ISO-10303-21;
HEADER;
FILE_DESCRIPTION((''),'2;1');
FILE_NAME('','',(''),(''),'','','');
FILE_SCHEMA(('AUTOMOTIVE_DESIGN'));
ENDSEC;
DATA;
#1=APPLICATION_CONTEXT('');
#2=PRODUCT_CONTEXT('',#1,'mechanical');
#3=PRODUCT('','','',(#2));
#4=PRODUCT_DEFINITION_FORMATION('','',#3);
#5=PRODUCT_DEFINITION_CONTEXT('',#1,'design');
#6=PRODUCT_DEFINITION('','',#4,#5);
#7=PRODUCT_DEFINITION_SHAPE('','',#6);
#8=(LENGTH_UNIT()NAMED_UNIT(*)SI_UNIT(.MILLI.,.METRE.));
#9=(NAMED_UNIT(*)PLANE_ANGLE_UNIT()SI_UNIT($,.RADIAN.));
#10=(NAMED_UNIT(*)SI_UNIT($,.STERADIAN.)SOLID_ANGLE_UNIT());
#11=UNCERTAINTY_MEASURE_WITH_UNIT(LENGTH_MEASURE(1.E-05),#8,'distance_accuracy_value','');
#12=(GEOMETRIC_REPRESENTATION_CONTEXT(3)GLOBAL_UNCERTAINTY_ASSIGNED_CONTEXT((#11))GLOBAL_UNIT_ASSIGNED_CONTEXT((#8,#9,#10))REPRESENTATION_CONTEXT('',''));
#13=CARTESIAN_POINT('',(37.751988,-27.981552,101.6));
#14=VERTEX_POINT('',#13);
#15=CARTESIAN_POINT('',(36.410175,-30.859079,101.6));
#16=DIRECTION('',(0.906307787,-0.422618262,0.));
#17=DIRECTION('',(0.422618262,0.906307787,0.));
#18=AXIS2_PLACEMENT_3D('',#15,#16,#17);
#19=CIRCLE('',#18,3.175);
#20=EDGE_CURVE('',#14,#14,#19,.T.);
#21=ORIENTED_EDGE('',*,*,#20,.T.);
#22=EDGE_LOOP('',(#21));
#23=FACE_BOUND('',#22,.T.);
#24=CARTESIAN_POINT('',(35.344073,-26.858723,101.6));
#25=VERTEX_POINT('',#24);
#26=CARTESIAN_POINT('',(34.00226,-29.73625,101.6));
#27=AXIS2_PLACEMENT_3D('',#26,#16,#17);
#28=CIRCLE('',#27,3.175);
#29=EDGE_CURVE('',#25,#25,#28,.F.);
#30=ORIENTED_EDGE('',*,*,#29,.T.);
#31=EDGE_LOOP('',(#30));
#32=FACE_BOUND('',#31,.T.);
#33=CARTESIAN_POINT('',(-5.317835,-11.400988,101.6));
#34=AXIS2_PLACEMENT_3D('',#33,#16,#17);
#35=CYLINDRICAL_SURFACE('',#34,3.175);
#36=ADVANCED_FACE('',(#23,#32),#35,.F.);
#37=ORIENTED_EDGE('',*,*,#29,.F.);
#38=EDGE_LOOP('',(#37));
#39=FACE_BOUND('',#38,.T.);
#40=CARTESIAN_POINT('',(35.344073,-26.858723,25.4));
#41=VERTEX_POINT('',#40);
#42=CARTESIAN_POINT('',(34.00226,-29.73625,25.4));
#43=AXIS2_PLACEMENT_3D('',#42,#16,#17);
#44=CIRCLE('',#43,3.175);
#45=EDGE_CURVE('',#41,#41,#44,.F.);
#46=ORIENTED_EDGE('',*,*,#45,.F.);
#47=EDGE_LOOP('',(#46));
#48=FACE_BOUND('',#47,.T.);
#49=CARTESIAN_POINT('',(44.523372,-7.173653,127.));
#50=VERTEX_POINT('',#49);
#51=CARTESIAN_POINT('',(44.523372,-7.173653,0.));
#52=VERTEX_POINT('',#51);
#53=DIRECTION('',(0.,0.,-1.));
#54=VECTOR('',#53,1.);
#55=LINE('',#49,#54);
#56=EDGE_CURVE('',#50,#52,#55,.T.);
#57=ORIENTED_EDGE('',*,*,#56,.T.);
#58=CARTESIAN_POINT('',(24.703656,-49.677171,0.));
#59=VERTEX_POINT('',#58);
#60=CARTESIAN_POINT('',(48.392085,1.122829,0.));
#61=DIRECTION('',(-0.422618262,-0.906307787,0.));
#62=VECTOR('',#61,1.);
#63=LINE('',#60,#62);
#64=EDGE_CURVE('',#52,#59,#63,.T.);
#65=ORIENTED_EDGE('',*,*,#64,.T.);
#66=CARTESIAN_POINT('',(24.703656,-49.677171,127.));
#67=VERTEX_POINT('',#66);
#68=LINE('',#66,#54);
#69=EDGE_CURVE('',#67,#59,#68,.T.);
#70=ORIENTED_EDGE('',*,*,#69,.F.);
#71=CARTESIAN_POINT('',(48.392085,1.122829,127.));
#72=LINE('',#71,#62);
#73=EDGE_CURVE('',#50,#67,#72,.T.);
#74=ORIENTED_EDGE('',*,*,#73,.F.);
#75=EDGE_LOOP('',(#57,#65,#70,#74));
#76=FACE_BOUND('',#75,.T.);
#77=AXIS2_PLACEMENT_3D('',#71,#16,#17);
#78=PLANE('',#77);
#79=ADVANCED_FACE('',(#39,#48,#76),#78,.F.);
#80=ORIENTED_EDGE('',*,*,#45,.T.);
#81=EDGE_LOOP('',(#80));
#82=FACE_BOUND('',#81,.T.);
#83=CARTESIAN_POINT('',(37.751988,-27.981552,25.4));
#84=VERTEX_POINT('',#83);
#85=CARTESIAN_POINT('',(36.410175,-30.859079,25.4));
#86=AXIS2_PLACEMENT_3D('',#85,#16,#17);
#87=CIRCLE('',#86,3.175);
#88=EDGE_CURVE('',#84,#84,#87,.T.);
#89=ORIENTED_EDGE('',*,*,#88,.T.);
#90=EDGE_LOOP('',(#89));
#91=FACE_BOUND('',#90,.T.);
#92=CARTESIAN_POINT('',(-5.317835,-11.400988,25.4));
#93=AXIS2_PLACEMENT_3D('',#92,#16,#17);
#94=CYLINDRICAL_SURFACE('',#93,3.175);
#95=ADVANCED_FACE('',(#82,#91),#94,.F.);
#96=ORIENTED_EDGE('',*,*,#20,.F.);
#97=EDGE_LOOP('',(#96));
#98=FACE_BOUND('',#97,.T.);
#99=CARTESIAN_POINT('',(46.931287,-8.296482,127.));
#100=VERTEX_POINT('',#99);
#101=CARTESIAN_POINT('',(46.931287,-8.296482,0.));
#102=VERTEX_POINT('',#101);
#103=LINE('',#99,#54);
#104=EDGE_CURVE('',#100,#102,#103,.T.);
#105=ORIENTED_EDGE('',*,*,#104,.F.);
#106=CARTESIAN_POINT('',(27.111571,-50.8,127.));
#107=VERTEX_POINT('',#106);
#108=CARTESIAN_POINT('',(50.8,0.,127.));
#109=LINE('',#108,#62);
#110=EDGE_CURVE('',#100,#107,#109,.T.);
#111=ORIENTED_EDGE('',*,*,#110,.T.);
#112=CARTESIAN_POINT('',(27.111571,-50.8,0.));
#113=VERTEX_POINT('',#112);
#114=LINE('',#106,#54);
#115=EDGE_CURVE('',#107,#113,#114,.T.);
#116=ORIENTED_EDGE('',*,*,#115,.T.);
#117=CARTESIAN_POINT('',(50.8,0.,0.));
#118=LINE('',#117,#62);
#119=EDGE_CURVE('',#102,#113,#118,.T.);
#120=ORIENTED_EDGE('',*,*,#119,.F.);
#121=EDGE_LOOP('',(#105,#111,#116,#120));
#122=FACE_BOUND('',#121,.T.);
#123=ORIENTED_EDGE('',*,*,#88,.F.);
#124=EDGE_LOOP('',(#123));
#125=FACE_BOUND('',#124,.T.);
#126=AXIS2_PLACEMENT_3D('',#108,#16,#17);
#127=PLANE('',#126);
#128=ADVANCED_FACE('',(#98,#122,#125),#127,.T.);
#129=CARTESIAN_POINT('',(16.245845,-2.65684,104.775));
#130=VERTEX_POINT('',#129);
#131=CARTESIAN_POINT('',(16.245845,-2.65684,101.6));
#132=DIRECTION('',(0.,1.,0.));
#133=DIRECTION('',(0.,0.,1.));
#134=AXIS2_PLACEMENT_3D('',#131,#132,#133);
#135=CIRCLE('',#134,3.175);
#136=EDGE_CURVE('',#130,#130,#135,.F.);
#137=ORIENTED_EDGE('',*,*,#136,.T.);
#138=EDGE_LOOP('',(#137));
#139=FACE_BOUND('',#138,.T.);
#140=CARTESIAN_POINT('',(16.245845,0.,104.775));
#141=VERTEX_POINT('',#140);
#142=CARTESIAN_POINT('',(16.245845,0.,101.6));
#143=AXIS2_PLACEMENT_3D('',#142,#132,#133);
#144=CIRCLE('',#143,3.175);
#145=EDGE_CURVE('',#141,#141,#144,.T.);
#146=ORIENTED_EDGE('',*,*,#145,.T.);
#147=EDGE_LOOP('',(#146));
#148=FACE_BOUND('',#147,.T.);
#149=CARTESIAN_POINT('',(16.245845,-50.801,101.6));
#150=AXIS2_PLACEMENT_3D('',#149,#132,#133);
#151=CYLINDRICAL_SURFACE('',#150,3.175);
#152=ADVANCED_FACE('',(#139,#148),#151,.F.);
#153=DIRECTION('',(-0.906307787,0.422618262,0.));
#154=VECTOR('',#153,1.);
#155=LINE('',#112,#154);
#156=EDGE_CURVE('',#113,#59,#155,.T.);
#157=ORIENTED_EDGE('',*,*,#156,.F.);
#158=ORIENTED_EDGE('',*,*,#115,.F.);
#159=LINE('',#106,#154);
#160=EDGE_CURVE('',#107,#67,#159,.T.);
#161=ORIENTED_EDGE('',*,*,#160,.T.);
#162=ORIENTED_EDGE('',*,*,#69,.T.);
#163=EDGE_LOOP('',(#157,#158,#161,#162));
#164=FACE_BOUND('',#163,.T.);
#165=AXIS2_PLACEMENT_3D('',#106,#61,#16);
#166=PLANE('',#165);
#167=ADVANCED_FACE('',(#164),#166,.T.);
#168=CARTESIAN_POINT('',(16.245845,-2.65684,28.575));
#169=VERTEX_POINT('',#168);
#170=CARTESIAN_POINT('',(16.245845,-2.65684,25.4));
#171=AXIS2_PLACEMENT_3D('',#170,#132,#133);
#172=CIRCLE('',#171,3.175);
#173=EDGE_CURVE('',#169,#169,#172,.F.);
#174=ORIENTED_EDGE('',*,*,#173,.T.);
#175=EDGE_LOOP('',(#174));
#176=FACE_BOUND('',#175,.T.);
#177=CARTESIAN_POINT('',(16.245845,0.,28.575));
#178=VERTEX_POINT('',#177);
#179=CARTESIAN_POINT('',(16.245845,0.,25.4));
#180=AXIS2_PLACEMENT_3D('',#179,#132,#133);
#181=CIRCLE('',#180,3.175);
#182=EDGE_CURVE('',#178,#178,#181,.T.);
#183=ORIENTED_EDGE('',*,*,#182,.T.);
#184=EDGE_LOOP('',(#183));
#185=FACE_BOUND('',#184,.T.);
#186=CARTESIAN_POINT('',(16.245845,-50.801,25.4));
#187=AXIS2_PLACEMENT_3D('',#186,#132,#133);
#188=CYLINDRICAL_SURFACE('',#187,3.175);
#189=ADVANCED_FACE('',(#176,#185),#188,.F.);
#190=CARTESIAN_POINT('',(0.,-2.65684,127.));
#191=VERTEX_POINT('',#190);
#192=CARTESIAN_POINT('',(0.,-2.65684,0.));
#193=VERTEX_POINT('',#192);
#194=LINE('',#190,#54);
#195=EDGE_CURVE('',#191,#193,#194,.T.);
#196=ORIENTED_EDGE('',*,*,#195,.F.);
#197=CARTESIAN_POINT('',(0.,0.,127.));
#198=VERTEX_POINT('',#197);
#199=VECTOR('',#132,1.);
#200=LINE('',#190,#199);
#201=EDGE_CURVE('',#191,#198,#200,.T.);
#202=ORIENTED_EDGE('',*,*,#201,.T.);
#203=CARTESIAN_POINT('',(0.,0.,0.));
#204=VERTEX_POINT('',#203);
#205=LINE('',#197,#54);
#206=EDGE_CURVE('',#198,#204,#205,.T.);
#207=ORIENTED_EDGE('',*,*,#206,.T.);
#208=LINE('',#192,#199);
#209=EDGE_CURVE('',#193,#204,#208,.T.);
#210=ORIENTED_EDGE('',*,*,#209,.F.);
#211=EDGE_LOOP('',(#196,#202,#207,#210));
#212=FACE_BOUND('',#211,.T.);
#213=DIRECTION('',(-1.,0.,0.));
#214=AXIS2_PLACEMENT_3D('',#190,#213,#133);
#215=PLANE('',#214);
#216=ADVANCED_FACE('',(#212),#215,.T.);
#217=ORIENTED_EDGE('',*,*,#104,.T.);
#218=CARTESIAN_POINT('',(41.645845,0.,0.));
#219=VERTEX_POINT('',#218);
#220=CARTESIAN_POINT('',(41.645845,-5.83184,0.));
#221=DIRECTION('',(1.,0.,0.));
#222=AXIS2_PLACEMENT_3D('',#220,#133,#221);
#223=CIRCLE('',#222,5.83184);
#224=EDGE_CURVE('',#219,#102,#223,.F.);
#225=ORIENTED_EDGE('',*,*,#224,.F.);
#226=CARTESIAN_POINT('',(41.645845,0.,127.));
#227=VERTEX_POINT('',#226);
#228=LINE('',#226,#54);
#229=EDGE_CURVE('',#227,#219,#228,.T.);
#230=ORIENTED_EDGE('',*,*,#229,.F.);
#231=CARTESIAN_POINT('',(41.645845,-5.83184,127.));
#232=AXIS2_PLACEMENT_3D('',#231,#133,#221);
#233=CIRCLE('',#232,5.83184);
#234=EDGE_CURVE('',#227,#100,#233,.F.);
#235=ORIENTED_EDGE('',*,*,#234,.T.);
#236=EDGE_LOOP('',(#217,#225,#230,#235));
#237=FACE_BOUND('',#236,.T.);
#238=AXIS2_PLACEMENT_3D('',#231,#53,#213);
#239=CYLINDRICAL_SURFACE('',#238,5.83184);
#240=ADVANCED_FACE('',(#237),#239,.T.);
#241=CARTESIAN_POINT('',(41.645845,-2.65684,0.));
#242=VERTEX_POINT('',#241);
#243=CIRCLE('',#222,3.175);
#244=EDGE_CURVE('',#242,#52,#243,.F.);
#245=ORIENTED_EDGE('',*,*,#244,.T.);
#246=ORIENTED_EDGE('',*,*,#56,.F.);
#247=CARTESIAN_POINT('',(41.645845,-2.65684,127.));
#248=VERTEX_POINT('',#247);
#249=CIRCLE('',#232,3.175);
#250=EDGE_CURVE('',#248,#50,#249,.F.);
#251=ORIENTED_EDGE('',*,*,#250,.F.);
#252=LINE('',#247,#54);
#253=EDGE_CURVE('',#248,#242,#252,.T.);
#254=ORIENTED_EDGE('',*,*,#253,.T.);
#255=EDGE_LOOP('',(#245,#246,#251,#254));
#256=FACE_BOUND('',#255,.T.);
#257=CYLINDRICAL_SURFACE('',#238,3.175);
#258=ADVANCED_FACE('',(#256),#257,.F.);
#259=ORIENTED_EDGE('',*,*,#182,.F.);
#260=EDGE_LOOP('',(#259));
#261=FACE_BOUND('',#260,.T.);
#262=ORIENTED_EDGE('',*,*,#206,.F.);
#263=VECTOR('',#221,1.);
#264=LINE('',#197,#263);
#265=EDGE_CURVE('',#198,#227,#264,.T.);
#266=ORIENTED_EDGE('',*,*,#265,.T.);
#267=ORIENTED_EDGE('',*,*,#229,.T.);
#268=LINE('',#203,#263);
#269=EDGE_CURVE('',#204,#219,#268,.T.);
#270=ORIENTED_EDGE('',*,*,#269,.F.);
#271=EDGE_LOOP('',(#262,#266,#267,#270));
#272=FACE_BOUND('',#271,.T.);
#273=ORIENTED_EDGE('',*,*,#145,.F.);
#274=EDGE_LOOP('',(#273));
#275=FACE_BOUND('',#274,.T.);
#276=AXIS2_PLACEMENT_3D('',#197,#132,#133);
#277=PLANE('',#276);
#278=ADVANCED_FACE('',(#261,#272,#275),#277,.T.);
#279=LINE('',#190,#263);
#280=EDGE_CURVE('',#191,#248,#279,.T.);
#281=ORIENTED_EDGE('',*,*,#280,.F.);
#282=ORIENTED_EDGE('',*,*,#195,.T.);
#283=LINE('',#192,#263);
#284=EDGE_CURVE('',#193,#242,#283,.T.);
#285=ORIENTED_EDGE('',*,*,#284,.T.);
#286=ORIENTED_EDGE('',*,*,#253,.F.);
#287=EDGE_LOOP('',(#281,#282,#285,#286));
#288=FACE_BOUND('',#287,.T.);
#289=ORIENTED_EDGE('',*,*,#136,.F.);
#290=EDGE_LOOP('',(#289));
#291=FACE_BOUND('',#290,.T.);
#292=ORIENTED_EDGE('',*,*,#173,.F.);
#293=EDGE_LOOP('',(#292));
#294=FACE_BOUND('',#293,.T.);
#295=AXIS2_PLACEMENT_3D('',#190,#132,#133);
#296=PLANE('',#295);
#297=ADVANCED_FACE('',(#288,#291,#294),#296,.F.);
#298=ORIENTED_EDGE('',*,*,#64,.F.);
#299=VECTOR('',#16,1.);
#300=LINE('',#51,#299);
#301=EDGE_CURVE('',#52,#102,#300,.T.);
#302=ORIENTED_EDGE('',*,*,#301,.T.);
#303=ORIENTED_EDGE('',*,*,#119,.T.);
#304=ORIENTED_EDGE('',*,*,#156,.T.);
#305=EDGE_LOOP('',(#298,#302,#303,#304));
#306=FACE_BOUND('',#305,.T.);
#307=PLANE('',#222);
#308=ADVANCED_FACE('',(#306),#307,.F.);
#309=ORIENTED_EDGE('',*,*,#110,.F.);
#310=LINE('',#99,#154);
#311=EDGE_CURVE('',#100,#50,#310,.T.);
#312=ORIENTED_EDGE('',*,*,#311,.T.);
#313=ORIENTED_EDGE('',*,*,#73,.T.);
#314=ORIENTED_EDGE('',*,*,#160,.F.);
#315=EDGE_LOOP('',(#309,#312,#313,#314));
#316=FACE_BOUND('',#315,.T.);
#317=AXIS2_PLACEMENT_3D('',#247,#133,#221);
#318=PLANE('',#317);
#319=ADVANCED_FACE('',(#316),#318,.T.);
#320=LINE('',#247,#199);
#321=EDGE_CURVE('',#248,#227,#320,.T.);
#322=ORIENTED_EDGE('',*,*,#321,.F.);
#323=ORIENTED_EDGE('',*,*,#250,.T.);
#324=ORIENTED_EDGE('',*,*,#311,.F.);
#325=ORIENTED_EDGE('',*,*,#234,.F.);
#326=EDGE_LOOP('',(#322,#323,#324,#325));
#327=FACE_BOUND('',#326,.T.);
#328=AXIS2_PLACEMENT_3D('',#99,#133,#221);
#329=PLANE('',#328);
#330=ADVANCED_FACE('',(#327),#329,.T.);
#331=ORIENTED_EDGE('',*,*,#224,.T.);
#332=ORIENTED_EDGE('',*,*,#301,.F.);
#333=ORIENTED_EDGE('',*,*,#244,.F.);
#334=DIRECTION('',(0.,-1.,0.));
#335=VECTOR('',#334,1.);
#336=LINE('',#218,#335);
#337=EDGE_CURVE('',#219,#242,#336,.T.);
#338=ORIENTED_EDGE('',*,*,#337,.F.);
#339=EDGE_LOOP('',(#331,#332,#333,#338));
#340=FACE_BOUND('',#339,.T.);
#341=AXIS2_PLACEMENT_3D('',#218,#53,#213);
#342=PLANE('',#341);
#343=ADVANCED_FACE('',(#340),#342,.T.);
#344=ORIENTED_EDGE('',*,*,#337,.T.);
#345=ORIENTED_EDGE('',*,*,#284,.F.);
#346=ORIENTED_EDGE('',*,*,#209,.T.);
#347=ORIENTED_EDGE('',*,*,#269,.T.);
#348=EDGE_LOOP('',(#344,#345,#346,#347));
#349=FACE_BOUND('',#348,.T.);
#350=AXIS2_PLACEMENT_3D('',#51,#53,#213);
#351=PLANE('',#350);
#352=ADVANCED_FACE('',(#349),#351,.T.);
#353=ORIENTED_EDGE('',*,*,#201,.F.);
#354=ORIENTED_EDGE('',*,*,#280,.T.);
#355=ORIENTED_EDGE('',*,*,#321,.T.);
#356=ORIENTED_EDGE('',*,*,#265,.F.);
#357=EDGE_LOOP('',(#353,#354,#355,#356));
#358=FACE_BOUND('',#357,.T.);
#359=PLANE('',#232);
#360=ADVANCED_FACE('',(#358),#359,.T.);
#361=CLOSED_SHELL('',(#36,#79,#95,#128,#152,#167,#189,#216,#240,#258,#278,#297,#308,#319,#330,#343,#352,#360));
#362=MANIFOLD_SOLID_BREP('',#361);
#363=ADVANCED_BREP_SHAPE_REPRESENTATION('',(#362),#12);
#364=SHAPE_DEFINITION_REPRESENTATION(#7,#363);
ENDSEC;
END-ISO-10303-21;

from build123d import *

# Parameters (mm, degrees)
BASE_FLANGE1_DEPTH = 127
CUT_EXTRUDE1_REACH = 146.789
SKETCH6_R          = 3.175
CUT_EXTRUDE2_REACH = 139.304
SKETCH7_R          = 3.175


# Read off the part's stored shape, not the designer's step: Base-Flange1
with BuildPart() as part:
    # Base-Flange1 outline → Base-Flange1 (new body)
    with BuildSketch(Plane.XY):
        with BuildLine():
            Line((44.523372088, -7.173652981), (24.703656185, -49.677170897))
            Line((24.703656185, -49.677170897), (27.111570966, -50.8))
            Line((27.111570966, -50.8), (46.931286869, -8.296482084))
            ThreePointArc((46.931286869, -8.296482084), (46.564368833, -2.698394652), (41.645844864, 0))
            Line((41.645844864, 0), (0, 0))
            Line((0, 0), (0, -2.65684))
            Line((0, -2.65684), (41.645844864, -2.65684))
            ThreePointArc((41.645844864, -2.65684), (44.323612704, -4.125913744), (44.523372088, -7.173652981))
        make_face()
    extrude(amount=BASE_FLANGE1_DEPTH)

    # Sketch6 → Cut-Extrude1 (cut, up to next)
    with BuildSketch(Plane(origin=(0, 0, 0), x_dir=(1, 0, 0), z_dir=(0, 1, 0)), mode=Mode.PRIVATE) as cut_extrude1_sk1:
        with Locations(Location((16.245844864, -101.6, 0), (0, 0, 270))):
            Circle(SKETCH6_R)
    cut_extrude1_tool1 = extrude(cut_extrude1_sk1.sketch, amount=-CUT_EXTRUDE1_REACH, mode=Mode.PRIVATE) & part.part
    # Sketch6 → Cut-Extrude1 (cut, up to next)
    with BuildSketch(Plane(origin=(0, 0, 0), x_dir=(1, 0, 0), z_dir=(0, 1, 0)), mode=Mode.PRIVATE) as cut_extrude1_sk2:
        with Locations(Location((16.245844864, -25.4, 0), (0, 0, 270))):
            Circle(SKETCH6_R)
    cut_extrude1_tool2 = extrude(cut_extrude1_sk2.sketch, amount=-CUT_EXTRUDE1_REACH, mode=Mode.PRIVATE) & part.part
    add(cut_extrude1_tool1.solids().sort_by_distance((16.245845, 0, 101.6))[0], mode=Mode.SUBTRACT)
    add(cut_extrude1_tool2.solids().sort_by_distance((16.245845, 0, 25.4))[0], mode=Mode.SUBTRACT)

    # Sketch7 → Cut-Extrude2 (cut, up to next)
    with BuildSketch(Plane(origin=(41.726805286, -19.457528855, 0), x_dir=(0, 0, -1), z_dir=(0.906307787036648, -0.4226182617407038, 0)), mode=Mode.PRIVATE) as cut_extrude2_sk1:
        with Locations(Location((-101.6, -12.580218597, 0), (0, 0, 90))):
            Circle(SKETCH7_R)
    cut_extrude2_tool1 = extrude(cut_extrude2_sk1.sketch, amount=-CUT_EXTRUDE2_REACH, mode=Mode.PRIVATE) & part.part
    # Sketch7 → Cut-Extrude2 (cut, up to next)
    with BuildSketch(Plane(origin=(41.726805286, -19.457528855, 0), x_dir=(0, 0, -1), z_dir=(0.906307787036648, -0.4226182617407038, 0)), mode=Mode.PRIVATE) as cut_extrude2_sk2:
        with Locations(Location((-25.4, -12.580218597, 0), (0, 0, 90))):
            Circle(SKETCH7_R)
    cut_extrude2_tool2 = extrude(cut_extrude2_sk2.sketch, amount=-CUT_EXTRUDE2_REACH, mode=Mode.PRIVATE) & part.part
    add(cut_extrude2_tool1.solids().sort_by_distance((36.410175, -30.859079, 101.6))[0], mode=Mode.SUBTRACT)
    add(cut_extrude2_tool2.solids().sort_by_distance((36.410175, -30.859079, 25.4))[0], mode=Mode.SUBTRACT)


solid = part.part
